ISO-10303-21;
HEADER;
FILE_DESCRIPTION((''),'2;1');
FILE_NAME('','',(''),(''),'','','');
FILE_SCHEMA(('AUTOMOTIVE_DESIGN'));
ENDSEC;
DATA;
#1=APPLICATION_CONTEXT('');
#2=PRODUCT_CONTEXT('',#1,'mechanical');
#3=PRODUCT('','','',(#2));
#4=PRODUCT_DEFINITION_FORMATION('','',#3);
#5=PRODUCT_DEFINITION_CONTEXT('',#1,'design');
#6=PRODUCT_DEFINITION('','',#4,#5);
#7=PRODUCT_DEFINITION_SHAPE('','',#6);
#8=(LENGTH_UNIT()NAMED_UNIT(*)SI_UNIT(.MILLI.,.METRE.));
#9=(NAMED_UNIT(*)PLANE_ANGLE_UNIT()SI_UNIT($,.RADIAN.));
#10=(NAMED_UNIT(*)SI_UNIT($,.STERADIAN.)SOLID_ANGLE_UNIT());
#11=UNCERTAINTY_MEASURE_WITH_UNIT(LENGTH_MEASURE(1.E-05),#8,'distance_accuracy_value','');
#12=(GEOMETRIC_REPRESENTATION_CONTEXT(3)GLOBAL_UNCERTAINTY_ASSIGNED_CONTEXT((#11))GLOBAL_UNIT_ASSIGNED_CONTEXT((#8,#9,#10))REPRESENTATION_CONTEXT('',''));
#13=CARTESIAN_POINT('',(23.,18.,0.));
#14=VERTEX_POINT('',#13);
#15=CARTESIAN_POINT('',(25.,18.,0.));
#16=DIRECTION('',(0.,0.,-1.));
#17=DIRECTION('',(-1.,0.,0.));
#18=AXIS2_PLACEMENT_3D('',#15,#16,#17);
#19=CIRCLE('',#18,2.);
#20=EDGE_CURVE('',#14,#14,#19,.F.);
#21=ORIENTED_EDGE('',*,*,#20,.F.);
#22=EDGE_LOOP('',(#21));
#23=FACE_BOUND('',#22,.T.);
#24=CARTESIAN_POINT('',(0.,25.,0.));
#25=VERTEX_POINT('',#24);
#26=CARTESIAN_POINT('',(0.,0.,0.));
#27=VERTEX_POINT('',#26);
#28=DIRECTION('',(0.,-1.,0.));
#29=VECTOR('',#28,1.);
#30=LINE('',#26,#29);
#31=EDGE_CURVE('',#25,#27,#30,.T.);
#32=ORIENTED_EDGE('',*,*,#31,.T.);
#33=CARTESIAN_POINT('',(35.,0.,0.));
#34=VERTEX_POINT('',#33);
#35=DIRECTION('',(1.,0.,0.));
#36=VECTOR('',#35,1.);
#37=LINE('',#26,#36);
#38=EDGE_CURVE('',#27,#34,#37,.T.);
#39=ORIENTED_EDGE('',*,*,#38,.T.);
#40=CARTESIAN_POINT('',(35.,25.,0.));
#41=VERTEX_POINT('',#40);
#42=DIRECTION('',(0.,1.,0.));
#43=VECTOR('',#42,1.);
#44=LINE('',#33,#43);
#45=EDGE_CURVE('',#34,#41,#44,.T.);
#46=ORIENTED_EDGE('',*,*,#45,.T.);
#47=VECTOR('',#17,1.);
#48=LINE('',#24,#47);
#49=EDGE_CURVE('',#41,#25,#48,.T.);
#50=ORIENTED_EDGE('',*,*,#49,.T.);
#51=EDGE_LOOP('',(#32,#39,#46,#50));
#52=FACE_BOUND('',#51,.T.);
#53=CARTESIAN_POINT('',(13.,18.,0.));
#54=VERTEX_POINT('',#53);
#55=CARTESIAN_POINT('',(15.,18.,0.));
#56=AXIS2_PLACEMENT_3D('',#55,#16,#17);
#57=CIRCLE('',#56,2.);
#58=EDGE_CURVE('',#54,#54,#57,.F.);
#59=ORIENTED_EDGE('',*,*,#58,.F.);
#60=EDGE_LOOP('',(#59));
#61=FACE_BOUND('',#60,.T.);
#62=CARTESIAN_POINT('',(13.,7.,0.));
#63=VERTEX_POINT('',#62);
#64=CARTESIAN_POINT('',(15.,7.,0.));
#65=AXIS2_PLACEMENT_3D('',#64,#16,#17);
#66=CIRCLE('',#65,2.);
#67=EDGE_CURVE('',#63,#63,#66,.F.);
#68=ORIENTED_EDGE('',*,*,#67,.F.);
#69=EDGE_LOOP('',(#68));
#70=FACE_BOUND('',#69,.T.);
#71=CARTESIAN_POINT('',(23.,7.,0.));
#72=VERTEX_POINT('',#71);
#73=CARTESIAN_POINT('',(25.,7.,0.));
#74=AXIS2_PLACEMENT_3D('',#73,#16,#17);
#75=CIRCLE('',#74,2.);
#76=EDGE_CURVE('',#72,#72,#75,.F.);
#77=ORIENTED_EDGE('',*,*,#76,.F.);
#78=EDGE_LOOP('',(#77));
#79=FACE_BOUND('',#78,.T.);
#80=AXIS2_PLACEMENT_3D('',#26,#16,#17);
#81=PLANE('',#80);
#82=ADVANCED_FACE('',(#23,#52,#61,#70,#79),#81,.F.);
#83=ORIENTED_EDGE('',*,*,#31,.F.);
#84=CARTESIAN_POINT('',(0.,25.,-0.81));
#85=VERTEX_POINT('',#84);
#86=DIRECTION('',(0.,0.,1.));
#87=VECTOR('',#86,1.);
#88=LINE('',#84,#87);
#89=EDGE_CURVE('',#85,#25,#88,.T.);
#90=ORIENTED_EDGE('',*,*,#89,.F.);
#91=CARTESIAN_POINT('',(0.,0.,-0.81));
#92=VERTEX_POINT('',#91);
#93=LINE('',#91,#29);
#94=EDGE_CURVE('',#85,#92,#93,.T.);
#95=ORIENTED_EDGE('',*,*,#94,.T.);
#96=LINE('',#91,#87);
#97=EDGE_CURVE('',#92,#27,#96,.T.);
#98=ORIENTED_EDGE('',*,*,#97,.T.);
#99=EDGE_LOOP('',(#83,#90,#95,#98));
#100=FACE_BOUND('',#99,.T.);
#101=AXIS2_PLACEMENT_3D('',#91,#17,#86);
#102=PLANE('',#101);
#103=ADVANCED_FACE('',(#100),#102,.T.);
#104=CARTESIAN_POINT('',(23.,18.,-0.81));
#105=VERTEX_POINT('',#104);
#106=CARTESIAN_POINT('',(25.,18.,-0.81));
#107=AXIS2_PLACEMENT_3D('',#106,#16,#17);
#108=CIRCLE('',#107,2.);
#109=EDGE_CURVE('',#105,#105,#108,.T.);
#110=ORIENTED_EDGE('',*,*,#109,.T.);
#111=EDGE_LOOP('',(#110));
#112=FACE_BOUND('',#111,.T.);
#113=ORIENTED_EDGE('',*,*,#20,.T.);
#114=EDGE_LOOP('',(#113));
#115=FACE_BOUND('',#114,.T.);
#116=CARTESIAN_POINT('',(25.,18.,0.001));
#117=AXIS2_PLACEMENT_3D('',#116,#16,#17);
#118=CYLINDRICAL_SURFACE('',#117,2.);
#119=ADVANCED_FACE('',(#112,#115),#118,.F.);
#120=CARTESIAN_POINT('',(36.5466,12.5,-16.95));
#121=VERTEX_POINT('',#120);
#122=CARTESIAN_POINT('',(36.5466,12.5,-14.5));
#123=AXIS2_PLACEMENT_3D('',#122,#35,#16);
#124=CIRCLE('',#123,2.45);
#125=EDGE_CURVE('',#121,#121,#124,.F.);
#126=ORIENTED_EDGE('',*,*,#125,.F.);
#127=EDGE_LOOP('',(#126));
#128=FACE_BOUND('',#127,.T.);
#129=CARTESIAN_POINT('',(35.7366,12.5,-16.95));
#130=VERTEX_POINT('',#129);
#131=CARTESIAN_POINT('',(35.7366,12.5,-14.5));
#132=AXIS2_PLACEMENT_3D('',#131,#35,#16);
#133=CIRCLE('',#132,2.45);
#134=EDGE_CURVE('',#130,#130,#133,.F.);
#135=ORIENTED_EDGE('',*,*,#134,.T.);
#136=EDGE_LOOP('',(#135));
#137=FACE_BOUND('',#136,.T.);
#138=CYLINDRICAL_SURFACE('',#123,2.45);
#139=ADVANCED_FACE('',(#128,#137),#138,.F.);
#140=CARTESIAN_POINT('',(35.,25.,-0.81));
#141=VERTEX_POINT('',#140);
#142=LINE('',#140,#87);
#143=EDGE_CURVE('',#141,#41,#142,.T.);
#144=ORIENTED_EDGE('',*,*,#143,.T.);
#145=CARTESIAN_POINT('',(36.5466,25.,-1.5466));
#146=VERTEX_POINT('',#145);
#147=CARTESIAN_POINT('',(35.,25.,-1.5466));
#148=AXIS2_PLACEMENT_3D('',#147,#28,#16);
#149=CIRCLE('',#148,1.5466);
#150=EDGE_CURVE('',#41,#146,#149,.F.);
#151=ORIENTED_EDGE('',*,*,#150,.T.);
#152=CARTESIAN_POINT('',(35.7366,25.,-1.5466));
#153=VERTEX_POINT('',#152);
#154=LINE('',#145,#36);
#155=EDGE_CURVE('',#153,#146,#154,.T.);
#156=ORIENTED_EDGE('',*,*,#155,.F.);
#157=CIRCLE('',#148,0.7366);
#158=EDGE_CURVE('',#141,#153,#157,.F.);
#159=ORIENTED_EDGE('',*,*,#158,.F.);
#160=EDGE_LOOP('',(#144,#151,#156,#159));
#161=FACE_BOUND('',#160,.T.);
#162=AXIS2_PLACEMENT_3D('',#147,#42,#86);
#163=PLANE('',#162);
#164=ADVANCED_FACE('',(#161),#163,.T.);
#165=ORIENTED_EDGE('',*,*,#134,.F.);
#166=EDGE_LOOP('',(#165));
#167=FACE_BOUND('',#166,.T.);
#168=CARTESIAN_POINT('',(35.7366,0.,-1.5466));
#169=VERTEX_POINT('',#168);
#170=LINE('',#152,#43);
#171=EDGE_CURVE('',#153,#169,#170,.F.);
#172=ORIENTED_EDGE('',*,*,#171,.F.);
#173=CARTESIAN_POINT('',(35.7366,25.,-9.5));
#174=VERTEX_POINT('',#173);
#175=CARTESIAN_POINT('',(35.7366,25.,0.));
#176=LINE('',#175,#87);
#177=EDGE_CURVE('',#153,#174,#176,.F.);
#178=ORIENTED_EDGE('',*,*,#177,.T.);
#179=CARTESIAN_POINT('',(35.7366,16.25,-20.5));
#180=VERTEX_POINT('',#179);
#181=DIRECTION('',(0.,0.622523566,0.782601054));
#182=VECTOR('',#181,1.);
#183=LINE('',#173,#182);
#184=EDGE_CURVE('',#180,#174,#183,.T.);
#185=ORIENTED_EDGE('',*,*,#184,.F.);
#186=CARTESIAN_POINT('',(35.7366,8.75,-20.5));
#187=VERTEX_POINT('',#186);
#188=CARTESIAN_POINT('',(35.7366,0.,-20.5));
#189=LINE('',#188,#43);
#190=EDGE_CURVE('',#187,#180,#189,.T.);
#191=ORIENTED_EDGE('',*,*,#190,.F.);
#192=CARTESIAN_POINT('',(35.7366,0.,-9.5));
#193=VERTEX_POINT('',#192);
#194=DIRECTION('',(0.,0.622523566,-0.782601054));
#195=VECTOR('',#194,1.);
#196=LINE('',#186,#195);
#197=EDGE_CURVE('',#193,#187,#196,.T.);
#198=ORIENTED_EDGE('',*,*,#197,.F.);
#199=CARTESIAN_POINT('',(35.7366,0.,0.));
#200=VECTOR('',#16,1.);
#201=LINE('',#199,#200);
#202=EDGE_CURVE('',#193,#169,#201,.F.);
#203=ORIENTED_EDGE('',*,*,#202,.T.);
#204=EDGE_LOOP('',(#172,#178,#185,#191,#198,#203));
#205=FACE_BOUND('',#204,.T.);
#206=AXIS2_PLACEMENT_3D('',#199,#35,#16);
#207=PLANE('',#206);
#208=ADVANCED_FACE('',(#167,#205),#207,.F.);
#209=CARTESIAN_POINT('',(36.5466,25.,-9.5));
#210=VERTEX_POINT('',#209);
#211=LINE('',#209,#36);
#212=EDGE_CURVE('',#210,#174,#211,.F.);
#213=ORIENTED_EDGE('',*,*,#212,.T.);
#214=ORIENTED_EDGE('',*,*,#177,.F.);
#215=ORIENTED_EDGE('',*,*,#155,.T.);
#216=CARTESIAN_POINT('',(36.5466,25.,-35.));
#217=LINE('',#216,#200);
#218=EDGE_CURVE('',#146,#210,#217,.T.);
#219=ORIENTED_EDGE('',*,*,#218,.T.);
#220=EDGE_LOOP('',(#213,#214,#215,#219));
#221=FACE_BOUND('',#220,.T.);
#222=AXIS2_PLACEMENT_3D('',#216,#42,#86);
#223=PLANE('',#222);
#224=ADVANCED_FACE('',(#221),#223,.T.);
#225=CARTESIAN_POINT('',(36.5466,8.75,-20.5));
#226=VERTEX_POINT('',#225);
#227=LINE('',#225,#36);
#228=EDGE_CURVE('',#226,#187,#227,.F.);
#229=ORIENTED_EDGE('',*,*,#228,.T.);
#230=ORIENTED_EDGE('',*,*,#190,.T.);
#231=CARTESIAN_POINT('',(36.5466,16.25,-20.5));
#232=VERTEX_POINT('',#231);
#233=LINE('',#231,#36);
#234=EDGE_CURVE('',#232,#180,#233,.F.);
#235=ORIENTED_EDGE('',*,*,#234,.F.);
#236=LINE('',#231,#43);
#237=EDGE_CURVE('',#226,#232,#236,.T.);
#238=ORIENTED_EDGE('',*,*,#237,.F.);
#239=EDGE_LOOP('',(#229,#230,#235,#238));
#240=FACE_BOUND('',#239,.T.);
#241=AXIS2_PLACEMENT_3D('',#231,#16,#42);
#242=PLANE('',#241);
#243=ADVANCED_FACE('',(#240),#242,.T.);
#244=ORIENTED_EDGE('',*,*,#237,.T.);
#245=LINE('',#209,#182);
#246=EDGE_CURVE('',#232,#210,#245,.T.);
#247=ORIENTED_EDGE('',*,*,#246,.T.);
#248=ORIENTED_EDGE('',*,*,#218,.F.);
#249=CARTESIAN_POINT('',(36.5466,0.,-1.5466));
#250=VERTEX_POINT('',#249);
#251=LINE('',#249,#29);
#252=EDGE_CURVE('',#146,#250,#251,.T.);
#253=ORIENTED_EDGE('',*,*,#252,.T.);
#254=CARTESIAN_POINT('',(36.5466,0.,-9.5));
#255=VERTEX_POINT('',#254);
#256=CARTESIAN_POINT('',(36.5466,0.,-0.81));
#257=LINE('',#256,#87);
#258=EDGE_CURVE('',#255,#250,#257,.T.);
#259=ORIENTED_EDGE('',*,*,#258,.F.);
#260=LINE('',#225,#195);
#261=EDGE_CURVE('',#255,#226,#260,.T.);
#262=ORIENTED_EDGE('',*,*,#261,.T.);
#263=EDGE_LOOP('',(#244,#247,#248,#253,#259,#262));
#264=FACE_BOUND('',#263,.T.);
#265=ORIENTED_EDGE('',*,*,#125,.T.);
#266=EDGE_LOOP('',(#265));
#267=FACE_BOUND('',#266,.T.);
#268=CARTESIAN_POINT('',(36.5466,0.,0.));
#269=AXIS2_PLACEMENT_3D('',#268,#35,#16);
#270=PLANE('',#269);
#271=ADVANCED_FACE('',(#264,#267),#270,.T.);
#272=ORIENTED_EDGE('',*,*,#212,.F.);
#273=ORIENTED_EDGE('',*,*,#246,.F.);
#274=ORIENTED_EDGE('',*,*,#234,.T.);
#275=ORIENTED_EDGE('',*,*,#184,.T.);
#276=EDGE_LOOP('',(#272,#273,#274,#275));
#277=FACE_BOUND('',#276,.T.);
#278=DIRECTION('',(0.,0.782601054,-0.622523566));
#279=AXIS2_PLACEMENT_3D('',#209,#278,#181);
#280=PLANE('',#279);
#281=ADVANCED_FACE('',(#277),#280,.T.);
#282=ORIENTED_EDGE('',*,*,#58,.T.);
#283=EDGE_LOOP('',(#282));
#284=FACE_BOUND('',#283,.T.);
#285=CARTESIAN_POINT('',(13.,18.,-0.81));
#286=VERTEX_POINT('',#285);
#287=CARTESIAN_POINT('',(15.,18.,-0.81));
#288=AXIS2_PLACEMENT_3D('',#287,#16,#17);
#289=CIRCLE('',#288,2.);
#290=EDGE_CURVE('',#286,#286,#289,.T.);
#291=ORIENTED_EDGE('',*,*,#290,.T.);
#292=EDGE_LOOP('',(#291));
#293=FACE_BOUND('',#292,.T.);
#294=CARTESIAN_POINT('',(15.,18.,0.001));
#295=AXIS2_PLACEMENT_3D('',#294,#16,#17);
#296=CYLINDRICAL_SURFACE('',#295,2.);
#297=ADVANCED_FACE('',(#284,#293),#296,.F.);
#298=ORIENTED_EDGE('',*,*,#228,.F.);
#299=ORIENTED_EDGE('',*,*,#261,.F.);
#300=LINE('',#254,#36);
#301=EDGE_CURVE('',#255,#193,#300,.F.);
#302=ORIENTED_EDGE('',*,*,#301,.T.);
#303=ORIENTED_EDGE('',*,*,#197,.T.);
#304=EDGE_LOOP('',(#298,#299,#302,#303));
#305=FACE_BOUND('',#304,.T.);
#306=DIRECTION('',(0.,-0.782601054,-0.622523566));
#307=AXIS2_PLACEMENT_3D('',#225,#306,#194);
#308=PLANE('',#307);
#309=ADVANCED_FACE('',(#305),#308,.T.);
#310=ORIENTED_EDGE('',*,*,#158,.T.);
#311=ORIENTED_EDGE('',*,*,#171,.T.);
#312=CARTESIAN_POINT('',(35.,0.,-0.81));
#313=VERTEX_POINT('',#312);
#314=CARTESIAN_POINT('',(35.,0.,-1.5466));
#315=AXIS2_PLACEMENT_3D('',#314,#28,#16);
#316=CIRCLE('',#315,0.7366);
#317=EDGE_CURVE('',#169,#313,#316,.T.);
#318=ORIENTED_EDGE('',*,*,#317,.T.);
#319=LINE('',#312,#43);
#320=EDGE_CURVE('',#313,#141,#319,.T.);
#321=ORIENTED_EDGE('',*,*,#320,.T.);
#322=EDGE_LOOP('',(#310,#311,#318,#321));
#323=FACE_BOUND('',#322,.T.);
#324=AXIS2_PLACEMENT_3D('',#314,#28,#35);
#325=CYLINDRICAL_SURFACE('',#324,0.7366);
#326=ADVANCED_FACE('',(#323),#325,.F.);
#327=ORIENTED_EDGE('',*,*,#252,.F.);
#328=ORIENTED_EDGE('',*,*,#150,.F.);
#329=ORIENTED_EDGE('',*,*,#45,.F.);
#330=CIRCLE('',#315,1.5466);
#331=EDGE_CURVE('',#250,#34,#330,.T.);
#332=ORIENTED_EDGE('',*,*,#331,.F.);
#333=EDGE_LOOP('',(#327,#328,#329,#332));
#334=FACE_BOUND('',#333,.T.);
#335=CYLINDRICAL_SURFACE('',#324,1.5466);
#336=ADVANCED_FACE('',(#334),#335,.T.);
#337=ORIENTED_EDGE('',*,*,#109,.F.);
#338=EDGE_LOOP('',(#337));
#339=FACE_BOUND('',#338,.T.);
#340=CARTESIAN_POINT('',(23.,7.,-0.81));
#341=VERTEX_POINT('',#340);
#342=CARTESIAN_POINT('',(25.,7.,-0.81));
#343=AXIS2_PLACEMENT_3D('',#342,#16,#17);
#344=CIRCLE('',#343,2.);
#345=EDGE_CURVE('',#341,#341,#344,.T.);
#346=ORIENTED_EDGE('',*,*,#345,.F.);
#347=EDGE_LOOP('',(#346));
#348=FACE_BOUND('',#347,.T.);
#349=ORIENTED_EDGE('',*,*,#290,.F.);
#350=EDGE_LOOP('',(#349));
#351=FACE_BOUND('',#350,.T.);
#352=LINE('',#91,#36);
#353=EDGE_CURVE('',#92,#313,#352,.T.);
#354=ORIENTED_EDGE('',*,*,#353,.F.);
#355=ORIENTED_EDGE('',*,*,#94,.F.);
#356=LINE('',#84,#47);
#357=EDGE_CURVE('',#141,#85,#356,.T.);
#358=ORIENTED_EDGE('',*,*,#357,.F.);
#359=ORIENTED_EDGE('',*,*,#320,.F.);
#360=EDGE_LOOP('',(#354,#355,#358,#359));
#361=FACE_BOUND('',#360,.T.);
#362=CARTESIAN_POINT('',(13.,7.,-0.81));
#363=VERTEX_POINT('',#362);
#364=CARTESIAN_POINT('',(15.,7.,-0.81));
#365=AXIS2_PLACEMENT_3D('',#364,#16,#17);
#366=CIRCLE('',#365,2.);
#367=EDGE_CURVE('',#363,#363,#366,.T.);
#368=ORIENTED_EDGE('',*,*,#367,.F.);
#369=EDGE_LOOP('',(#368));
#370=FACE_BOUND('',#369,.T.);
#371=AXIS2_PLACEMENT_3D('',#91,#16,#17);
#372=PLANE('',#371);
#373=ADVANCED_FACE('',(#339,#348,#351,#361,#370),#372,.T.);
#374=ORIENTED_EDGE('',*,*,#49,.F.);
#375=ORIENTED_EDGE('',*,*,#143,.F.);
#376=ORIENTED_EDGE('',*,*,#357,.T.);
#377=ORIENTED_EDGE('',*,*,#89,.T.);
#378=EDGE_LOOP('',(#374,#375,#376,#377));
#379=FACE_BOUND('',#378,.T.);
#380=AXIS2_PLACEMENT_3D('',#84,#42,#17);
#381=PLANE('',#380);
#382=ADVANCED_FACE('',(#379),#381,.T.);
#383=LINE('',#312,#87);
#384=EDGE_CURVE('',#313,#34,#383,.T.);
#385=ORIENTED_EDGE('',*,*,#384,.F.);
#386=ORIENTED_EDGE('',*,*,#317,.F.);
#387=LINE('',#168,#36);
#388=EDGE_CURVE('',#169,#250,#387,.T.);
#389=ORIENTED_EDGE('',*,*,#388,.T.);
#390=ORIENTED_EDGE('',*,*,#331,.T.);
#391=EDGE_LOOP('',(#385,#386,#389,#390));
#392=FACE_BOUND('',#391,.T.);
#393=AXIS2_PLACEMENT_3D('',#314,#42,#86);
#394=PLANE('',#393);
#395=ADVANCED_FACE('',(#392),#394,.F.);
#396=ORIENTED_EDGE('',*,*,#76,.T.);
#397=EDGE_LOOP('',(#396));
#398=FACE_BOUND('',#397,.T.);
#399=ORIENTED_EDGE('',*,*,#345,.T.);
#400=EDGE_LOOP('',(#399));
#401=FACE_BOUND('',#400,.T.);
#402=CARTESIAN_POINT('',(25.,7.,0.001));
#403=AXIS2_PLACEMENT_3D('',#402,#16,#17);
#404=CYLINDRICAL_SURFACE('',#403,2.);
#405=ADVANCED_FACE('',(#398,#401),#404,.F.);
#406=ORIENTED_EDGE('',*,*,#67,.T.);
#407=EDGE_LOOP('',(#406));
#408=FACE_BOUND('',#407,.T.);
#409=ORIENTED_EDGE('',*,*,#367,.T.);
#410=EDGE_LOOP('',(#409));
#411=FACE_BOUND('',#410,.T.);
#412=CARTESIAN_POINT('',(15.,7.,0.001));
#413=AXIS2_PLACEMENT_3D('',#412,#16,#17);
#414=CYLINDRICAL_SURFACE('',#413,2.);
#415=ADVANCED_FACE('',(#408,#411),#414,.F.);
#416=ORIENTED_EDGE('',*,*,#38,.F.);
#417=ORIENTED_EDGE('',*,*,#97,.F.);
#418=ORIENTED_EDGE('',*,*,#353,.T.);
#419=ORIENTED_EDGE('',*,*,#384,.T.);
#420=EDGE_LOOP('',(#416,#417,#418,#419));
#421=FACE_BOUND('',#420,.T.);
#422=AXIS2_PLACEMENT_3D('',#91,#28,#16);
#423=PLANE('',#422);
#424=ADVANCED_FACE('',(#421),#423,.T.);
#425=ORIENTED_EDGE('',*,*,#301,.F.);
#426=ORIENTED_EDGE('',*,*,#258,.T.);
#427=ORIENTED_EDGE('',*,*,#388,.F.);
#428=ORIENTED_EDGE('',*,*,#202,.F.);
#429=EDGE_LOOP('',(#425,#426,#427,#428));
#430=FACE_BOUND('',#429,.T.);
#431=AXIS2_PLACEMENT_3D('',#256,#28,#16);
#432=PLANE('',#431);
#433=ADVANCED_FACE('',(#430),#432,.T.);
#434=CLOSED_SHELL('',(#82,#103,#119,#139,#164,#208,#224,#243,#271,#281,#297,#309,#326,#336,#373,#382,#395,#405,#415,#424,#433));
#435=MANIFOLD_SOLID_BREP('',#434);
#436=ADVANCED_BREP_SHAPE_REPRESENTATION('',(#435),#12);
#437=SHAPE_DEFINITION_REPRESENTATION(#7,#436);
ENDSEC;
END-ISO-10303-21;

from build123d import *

# Parameters (mm, degrees)
SKETCH1_W          = 35
SKETCH1_H          = 25
BASE_FLANGE1_DEPTH = 0.81
EDGE_FLANGE1_DEPTH = 25
CUT_EXTRUDE1_REACH = 57.943
SKETCH9_R          = 2
CUT_EXTRUDE2_REACH = 57.921
SKETCH11_R         = 2.45


# Sheet-metal steps are written as plain solids
with BuildPart() as part:
    # Sketch1 → Base-Flange1 (new body)
    with BuildSketch(Plane.XY):
        with Locations((17.5, 12.5)):
            Rectangle(SKETCH1_W, SKETCH1_H)
    extrude(amount=-BASE_FLANGE1_DEPTH)

    # Edge-Flange1 section (across the edge) → Edge-Flange1 (add)
    with BuildSketch(Plane(origin=(35.7366, 25, -0.81), x_dir=(-1, 0, 0), z_dir=(0, -1, 0))):
        with BuildLine():
            Line((-0.81, 0.7366), (-0.81, 34.19))
            Line((-0.81, 34.19), (0, 34.19))
            Line((0, 34.19), (0, 0.7366))
            ThreePointArc((0, 0.7366), (0.215745145, 0.215745145), (0.7366, 0))
            Line((0.7366, 0), (0.7366, -0.81))
            ThreePointArc((0.7366, -0.81), (-0.357011348, -0.357011348), (-0.81, 0.7366))
        make_face()
    extrude(amount=EDGE_FLANGE1_DEPTH)

    # Sketch9 → Cut-Extrude1 (cut, up to next)
    with BuildSketch(Plane(origin=(0, 0, -0.81), x_dir=(-1, 0, 0), z_dir=(0, 0, -1)), mode=Mode.PRIVATE) as cut_extrude1_sk1:
        with Locations((-25, 18)):
            Circle(SKETCH9_R)
    cut_extrude1_tool1 = extrude(cut_extrude1_sk1.sketch, amount=-CUT_EXTRUDE1_REACH, mode=Mode.PRIVATE) & part.part
    # Sketch9 → Cut-Extrude1 (cut, up to next)
    with BuildSketch(Plane(origin=(0, 0, -0.81), x_dir=(-1, 0, 0), z_dir=(0, 0, -1)), mode=Mode.PRIVATE) as cut_extrude1_sk2:
        with Locations((-25, 7)):
            Circle(SKETCH9_R)
    cut_extrude1_tool2 = extrude(cut_extrude1_sk2.sketch, amount=-CUT_EXTRUDE1_REACH, mode=Mode.PRIVATE) & part.part
    # Sketch9 → Cut-Extrude1 (cut, up to next)
    with BuildSketch(Plane(origin=(0, 0, -0.81), x_dir=(-1, 0, 0), z_dir=(0, 0, -1)), mode=Mode.PRIVATE) as cut_extrude1_sk3:
        with Locations((-15, 18)):
            Circle(SKETCH9_R)
    cut_extrude1_tool3 = extrude(cut_extrude1_sk3.sketch, amount=-CUT_EXTRUDE1_REACH, mode=Mode.PRIVATE) & part.part
    # Sketch9 → Cut-Extrude1 (cut, up to next)
    with BuildSketch(Plane(origin=(0, 0, -0.81), x_dir=(-1, 0, 0), z_dir=(0, 0, -1)), mode=Mode.PRIVATE) as cut_extrude1_sk4:
        with Locations((-15, 7)):
            Circle(SKETCH9_R)
    cut_extrude1_tool4 = extrude(cut_extrude1_sk4.sketch, amount=-CUT_EXTRUDE1_REACH, mode=Mode.PRIVATE) & part.part
    add(cut_extrude1_tool1.solids().sort_by_distance((25, 18, -0.81))[0], mode=Mode.SUBTRACT)
    add(cut_extrude1_tool2.solids().sort_by_distance((25, 7, -0.81))[0], mode=Mode.SUBTRACT)
    add(cut_extrude1_tool3.solids().sort_by_distance((15, 18, -0.81))[0], mode=Mode.SUBTRACT)
    add(cut_extrude1_tool4.solids().sort_by_distance((15, 7, -0.81))[0], mode=Mode.SUBTRACT)

    # Sketch11 → Cut-Extrude2 (cut, up to next)
    with BuildSketch(Plane.ZY.offset(-35.7366), mode=Mode.PRIVATE) as cut_extrude2_sk1:
        with Locations(Location((-14.5, 12.5, 0), (0, 0, 180))):
            Circle(SKETCH11_R)
    cut_extrude2_tool1 = extrude(cut_extrude2_sk1.sketch, amount=-CUT_EXTRUDE2_REACH, mode=Mode.PRIVATE) & part.part
    # Sketch11 → Cut-Extrude2 (cut, up to next)
    with BuildSketch(Plane.ZY.offset(-35.7366), mode=Mode.PRIVATE) as cut_extrude2_sk2:
        Polygon((-9.5, 25), (-20.5, 16.25), (-20.5, 8.75), (-9.5, 0), (-14.5, 0), (-39.5, 0), (-39.5, 25), (-14.5, 25), align=None)
    cut_extrude2_tool2 = extrude(cut_extrude2_sk2.sketch, amount=-CUT_EXTRUDE2_REACH, mode=Mode.PRIVATE) & part.part
    add(cut_extrude2_tool1.solids().sort_by_distance((35.7366, 12.5, -14.5))[0], mode=Mode.SUBTRACT)
    add(cut_extrude2_tool2.solids().sort_by_distance((35.7366, 12.5, -27.781546))[0], mode=Mode.SUBTRACT)


solid = part.part
